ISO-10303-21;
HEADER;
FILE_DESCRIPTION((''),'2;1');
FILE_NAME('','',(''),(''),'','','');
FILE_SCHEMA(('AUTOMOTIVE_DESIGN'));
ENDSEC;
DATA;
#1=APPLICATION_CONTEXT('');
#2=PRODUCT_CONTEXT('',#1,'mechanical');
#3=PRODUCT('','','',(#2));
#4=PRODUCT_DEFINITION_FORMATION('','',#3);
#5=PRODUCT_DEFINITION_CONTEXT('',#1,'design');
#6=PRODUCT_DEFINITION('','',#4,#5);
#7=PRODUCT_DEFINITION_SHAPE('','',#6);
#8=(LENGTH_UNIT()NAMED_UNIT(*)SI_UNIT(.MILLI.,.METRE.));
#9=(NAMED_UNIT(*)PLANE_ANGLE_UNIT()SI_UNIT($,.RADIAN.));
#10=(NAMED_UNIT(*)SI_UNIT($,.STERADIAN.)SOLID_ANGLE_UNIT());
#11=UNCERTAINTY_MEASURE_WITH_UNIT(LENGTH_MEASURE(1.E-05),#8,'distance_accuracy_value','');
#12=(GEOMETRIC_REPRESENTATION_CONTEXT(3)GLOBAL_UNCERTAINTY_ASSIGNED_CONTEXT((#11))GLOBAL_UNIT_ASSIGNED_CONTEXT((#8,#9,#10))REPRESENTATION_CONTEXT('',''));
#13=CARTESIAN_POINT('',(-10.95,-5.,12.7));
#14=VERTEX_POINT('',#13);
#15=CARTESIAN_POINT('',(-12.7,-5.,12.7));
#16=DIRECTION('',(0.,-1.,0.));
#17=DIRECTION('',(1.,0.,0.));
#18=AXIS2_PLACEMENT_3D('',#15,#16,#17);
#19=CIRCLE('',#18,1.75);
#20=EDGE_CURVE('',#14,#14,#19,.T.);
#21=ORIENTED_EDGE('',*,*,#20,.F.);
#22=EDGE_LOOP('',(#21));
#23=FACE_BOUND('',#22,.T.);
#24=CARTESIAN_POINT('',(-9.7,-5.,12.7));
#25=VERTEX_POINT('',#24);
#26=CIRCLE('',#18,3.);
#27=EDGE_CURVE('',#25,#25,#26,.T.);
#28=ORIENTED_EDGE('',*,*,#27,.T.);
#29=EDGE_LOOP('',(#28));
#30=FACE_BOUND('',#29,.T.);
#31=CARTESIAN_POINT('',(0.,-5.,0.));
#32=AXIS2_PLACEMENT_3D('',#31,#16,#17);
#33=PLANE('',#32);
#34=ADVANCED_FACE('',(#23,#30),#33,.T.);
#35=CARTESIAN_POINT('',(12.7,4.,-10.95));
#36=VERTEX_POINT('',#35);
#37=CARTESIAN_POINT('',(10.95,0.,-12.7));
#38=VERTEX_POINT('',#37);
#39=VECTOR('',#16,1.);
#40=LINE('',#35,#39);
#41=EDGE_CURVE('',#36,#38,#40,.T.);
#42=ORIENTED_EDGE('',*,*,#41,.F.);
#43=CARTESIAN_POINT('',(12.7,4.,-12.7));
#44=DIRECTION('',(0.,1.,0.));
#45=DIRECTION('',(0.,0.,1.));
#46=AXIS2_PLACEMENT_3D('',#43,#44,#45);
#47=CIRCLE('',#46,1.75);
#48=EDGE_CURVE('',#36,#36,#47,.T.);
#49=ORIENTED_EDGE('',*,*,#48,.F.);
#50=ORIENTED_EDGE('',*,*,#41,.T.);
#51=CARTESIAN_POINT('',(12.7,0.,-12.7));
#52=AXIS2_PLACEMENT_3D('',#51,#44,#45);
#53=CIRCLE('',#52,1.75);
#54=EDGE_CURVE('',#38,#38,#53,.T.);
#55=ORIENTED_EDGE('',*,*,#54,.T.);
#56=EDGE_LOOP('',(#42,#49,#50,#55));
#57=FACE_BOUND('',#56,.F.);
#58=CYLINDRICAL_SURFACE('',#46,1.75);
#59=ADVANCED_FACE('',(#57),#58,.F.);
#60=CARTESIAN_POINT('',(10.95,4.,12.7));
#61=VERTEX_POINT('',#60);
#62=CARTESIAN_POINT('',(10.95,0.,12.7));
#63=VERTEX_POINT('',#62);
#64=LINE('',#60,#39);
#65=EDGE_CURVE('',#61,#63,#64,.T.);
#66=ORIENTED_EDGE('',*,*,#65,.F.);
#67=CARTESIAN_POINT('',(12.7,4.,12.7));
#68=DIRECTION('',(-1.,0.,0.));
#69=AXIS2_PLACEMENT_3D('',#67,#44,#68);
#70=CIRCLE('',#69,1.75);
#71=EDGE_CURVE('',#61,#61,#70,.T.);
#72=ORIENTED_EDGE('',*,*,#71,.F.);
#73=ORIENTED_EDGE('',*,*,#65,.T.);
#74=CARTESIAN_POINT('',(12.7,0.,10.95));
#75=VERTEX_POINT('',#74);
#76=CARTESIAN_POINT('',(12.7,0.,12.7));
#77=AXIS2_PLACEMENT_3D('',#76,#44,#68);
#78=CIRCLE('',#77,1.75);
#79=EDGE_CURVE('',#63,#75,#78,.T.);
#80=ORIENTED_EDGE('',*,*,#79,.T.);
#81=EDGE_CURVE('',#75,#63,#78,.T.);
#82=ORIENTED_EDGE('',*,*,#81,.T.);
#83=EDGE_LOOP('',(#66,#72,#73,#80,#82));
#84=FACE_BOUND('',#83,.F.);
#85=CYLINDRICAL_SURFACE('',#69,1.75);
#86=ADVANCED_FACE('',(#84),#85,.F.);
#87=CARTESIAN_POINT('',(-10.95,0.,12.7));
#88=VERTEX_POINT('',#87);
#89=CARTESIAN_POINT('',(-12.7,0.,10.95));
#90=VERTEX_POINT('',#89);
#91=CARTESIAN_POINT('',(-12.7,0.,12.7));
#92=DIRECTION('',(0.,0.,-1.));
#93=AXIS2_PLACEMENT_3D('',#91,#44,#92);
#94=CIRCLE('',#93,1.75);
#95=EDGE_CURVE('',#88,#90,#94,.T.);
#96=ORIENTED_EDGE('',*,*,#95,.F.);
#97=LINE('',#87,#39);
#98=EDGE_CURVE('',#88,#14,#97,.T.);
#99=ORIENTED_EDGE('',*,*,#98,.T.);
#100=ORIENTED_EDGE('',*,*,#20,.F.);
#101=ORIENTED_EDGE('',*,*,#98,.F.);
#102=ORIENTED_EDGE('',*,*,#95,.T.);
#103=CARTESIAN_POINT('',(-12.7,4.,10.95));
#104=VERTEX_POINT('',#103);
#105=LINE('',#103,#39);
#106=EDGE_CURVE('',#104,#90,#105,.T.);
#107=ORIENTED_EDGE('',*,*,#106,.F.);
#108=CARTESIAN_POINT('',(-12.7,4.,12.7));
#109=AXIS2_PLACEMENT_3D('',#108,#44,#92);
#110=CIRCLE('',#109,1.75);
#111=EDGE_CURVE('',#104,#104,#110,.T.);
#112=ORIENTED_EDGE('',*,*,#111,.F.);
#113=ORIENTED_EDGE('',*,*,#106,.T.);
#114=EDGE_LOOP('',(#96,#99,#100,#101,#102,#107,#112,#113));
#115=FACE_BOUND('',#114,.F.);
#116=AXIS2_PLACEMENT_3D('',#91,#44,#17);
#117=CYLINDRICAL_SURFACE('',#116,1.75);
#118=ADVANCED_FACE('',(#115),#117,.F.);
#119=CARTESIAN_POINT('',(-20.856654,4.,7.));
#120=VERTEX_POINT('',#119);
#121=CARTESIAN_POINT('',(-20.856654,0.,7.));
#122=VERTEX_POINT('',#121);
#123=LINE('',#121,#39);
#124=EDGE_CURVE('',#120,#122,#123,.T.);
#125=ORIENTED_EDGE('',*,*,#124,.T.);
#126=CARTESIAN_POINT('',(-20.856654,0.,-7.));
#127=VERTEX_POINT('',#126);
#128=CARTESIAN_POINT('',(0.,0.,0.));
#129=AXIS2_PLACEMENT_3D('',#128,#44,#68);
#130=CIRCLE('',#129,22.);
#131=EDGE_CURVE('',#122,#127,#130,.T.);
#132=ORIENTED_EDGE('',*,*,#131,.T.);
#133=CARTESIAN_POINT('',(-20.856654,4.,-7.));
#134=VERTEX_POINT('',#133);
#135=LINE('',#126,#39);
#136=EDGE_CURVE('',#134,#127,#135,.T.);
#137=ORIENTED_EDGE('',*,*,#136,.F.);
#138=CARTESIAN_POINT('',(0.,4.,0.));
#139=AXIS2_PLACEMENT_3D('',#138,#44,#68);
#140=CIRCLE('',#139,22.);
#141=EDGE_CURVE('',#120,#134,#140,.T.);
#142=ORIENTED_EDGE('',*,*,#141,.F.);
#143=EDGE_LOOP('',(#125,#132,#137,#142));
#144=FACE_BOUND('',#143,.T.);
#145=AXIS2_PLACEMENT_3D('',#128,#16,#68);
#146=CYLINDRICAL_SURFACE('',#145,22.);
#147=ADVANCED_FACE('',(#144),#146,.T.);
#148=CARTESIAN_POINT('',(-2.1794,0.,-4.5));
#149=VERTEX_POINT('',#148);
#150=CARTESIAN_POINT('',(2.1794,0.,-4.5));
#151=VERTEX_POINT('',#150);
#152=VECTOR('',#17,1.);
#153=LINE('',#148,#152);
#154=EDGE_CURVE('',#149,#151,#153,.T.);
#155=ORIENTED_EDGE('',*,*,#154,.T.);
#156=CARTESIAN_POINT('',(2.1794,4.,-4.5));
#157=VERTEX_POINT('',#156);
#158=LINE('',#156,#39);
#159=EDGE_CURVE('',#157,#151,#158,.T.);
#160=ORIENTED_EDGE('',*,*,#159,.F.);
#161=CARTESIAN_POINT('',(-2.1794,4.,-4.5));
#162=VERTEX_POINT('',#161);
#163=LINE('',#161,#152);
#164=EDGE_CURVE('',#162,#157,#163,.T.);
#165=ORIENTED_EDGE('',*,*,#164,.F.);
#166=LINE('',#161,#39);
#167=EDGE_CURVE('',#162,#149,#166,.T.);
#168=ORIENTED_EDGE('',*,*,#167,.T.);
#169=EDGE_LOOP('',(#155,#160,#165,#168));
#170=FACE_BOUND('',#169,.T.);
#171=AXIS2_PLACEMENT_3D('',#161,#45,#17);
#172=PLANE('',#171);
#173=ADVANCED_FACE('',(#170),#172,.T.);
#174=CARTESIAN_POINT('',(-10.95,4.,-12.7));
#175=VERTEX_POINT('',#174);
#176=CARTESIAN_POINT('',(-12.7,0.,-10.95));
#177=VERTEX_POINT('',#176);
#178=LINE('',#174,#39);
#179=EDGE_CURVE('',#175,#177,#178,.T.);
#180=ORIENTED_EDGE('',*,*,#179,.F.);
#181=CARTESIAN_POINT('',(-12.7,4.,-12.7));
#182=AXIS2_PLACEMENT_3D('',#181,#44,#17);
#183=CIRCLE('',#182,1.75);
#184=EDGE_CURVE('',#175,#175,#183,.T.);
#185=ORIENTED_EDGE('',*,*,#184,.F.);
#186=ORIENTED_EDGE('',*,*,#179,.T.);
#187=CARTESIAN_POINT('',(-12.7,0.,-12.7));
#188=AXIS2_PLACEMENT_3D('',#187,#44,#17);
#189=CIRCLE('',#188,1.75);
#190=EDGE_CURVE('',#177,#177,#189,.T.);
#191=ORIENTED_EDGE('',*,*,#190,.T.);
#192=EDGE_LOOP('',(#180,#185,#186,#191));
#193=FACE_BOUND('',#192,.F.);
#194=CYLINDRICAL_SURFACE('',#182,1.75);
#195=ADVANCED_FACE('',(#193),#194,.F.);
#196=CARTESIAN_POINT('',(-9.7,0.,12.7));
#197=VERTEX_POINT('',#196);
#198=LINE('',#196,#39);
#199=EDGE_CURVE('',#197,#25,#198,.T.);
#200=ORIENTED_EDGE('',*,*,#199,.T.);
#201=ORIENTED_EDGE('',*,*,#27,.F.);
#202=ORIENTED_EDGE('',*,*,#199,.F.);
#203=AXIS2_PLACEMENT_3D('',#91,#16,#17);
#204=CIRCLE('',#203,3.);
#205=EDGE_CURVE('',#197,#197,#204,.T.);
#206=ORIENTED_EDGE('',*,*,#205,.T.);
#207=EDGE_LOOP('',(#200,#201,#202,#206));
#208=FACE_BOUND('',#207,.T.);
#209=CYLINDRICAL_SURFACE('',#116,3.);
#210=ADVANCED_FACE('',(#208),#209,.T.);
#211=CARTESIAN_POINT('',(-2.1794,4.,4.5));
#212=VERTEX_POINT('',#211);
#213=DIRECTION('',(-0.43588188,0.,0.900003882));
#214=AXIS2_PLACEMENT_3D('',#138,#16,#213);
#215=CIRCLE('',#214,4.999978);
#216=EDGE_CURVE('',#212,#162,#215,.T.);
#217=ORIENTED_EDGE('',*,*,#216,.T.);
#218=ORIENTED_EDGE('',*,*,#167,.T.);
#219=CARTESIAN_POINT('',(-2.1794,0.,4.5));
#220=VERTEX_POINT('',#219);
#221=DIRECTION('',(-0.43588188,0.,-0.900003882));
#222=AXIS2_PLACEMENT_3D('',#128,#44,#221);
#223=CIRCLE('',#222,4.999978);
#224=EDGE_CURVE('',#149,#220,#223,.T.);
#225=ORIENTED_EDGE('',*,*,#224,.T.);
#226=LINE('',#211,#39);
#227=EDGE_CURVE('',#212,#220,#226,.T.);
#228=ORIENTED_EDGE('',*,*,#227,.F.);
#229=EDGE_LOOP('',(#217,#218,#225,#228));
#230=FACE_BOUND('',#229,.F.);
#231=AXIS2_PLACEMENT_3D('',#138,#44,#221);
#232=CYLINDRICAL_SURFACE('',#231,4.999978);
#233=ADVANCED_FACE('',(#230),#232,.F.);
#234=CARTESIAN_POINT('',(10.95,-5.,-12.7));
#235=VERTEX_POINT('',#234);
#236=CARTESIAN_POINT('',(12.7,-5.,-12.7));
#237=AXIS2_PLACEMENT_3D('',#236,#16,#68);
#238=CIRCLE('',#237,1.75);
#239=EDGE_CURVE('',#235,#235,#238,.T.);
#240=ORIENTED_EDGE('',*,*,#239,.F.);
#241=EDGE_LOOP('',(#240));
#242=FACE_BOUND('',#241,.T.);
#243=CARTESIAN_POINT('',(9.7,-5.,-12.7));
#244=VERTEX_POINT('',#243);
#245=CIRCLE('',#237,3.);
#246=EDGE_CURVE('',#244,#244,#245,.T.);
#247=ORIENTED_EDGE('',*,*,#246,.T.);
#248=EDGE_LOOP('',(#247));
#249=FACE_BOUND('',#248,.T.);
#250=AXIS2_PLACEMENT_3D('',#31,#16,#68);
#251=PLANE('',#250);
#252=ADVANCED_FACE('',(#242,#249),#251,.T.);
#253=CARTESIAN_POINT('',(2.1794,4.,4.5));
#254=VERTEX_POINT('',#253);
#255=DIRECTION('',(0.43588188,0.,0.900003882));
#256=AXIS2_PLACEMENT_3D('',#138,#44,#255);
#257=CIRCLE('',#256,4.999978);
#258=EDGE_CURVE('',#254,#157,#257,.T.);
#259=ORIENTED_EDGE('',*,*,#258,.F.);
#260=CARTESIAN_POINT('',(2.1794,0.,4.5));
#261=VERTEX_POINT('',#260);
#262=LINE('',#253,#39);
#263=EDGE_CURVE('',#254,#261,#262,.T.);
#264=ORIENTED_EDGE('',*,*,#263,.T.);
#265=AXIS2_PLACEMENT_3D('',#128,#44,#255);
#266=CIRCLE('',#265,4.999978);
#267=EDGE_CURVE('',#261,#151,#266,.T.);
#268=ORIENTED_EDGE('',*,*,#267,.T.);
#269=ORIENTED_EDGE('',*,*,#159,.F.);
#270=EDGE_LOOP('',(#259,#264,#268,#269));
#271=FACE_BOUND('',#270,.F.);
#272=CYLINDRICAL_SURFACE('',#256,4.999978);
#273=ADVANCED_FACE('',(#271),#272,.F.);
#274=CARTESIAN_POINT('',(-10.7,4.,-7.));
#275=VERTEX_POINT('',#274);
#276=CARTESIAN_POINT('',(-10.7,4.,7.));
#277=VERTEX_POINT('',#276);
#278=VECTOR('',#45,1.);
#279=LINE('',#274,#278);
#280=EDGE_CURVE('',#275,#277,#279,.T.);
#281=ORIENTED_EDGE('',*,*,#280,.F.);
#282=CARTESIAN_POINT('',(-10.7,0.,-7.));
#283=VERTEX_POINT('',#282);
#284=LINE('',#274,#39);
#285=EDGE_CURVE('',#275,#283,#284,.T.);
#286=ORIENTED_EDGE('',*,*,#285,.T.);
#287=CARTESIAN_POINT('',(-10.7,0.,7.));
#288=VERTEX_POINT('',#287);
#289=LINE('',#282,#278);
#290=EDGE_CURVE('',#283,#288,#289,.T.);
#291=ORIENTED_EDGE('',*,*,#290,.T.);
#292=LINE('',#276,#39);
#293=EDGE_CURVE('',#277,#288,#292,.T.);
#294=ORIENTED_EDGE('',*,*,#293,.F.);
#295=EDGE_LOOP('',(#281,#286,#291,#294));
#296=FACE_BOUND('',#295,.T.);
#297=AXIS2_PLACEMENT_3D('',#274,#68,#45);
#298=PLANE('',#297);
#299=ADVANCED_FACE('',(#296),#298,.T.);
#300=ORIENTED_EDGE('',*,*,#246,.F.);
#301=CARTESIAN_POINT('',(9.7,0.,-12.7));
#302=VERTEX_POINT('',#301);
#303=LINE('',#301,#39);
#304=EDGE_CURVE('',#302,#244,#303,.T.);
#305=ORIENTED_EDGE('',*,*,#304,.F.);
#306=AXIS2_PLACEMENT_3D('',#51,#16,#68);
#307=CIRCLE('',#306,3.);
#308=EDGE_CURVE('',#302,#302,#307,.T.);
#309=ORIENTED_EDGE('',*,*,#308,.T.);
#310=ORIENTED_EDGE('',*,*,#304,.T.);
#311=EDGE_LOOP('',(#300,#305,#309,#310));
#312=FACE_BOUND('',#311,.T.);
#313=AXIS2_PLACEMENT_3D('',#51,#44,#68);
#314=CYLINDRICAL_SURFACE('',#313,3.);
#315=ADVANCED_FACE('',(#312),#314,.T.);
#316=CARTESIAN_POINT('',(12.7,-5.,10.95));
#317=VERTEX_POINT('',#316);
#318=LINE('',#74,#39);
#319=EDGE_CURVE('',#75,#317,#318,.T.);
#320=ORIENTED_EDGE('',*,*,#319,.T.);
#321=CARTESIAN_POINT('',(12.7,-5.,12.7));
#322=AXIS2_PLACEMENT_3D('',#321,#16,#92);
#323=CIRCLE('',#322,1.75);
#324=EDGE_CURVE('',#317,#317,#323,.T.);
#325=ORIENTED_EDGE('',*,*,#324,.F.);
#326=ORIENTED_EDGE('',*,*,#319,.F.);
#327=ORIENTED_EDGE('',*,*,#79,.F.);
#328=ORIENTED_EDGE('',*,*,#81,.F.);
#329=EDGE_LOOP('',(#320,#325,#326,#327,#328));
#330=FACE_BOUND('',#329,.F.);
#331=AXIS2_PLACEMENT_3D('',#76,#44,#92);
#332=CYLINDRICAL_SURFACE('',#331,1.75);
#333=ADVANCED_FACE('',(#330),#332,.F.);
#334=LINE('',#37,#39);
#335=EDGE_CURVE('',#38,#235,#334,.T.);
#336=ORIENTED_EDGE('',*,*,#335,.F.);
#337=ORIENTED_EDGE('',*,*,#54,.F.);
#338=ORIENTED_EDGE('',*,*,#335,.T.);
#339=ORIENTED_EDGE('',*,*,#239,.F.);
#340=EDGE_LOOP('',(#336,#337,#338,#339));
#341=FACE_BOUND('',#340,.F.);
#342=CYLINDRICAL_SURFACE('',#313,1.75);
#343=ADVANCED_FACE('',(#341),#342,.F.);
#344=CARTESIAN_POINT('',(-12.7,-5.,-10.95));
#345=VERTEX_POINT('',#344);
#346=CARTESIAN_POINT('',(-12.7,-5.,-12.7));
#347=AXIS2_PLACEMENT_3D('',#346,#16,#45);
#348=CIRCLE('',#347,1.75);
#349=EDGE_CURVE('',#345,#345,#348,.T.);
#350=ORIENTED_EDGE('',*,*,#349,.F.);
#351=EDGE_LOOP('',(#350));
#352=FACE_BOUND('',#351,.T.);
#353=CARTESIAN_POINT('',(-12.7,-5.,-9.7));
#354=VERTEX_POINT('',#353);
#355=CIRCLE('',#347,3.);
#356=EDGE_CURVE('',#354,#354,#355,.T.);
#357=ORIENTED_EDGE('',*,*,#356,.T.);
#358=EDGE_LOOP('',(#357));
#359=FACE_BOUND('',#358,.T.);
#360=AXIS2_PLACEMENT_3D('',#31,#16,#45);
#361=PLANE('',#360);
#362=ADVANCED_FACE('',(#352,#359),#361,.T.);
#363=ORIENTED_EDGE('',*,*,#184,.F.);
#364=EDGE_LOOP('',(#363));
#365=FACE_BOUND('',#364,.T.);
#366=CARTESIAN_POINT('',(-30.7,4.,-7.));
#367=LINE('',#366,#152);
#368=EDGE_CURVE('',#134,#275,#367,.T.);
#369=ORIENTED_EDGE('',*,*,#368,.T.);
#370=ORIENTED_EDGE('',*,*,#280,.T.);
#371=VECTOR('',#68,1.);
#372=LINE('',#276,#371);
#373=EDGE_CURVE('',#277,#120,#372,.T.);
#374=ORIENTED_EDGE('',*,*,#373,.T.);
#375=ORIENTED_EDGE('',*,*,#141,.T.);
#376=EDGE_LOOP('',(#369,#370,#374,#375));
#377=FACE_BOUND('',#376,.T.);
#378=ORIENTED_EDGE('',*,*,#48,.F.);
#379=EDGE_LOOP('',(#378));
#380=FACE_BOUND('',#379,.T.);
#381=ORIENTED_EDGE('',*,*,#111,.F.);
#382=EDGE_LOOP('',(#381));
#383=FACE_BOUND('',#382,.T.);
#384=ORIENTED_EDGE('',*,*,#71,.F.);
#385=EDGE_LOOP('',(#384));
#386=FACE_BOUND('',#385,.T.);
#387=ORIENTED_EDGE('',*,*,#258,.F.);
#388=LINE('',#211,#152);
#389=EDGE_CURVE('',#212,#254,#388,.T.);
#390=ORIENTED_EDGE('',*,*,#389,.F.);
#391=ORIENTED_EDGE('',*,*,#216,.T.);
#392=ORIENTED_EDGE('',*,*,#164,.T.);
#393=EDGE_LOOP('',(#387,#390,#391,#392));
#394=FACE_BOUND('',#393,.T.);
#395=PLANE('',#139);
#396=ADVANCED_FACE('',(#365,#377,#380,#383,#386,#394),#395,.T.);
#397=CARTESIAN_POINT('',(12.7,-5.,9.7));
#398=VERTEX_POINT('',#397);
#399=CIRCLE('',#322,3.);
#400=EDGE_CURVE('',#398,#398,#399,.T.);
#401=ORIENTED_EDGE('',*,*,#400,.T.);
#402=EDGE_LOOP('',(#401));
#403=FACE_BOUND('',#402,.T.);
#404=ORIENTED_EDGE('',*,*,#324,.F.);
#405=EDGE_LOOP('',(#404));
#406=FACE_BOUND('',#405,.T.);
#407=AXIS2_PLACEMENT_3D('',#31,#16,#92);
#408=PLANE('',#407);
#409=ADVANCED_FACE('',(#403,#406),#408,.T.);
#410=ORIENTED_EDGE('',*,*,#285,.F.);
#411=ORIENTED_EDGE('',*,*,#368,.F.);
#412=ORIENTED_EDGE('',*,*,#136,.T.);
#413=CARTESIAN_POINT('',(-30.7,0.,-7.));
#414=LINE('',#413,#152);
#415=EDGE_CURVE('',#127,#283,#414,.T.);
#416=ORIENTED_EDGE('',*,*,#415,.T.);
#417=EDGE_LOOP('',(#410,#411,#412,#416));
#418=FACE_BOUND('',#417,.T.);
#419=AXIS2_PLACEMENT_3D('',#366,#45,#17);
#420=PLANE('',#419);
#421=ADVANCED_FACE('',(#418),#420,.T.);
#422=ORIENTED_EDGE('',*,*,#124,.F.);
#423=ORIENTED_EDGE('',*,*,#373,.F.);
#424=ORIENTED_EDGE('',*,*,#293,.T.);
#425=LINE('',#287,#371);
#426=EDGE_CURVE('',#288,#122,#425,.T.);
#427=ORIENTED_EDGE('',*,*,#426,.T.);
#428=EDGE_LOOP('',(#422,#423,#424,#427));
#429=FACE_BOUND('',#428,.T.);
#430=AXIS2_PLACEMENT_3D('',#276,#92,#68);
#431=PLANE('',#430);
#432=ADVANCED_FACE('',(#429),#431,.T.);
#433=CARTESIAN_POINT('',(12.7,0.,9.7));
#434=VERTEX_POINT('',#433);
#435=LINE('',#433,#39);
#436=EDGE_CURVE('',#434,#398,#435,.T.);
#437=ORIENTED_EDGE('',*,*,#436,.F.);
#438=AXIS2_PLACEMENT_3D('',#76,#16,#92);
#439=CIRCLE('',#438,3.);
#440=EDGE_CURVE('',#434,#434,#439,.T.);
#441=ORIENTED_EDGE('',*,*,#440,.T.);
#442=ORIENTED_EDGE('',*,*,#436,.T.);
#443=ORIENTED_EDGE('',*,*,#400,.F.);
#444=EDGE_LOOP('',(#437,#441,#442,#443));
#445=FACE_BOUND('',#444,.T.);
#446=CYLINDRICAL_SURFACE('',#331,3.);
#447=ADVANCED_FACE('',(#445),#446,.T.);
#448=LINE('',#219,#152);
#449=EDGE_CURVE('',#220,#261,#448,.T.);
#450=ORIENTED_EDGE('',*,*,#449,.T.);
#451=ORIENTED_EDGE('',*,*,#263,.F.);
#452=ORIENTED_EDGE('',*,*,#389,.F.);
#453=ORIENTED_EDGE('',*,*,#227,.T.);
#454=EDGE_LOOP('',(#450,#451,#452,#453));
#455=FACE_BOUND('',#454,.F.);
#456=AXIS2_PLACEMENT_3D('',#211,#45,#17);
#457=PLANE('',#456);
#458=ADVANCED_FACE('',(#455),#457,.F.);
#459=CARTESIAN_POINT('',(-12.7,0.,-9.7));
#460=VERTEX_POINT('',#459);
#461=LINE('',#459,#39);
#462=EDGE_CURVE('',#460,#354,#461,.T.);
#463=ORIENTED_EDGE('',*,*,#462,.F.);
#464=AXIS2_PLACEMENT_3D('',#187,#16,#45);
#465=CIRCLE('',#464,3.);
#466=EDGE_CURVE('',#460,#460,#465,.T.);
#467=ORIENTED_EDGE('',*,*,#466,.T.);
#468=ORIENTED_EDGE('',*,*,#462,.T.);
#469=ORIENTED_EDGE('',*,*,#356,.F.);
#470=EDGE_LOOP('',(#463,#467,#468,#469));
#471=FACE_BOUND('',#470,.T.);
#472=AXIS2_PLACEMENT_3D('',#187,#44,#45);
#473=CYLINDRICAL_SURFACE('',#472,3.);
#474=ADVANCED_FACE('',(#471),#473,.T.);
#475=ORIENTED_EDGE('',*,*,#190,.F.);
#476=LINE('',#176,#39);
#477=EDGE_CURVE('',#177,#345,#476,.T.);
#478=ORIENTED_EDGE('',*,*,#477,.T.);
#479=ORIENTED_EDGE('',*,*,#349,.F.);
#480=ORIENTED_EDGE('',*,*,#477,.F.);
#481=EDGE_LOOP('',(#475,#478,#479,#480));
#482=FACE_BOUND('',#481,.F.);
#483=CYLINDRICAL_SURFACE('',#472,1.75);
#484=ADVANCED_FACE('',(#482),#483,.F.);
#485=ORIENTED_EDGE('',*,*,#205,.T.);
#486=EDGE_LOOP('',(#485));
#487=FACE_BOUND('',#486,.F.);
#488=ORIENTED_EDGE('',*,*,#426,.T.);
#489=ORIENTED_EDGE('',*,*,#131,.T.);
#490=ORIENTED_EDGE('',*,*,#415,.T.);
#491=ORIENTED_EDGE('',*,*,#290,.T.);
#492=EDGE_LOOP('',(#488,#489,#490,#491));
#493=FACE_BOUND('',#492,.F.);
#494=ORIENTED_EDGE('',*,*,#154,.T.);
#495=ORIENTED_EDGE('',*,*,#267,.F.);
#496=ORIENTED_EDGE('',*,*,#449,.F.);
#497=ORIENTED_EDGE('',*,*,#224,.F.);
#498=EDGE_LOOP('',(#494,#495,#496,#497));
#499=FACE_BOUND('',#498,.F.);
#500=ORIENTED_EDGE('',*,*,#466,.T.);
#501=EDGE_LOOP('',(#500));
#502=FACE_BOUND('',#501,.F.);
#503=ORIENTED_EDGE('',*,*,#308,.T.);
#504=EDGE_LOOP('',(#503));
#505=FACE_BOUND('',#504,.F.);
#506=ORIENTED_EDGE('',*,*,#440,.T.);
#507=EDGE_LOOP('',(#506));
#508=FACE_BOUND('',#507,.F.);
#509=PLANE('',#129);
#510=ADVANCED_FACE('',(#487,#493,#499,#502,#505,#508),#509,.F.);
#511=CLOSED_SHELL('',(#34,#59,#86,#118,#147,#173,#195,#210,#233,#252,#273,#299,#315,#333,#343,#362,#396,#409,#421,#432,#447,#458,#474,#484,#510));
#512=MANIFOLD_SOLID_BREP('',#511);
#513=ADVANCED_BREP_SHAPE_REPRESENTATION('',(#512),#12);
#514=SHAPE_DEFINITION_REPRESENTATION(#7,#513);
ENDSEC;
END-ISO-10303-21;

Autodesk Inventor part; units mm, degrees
ref_plane "YZ Plane" through (0, 0, 0) normal (1, 0, 0) x (0, 1, 0)
ref_plane "XZ Plane" through (0, 0, 0) normal (0, 1, 0) x (-1, 0, 0)
ref_plane "XY Plane" through (0, 0, 0) normal (0, 0, 1) x (1, 0, 0)
sketch "Sketch1" plane through (0, 0, 0) normal (0, 1, 0) x (-1, 0, 0)
  circle A0 centre (0, 0) radius 22
  dimension "d0" = 44
extrude "Extrusion1" add sketch "Sketch1" along normal blind 4
sketch "Sketch2" plane through (0, 4, 0) normal (0, 1, 0) x (1, 0, 0)
  line L0 (0, 0) -> (-12.7, 0) construction
  line L1 (0, 0) -> (12.7, 0) construction
  line L2 (-12.7, 0) -> (-12.7, 12.7) construction
  line L3 (-12.7, 12.7) -> (12.7, 12.7) construction
  circle A0 centre (-12.7, 12.7) radius 1.75
  dimension "d3" = 12.7
  dimension "d4" = 12.7
  dimension "d5" = 12.7
  dimension "d6" = 3.5
extrude "Extrusion2" cut sketch "Sketch2" against normal blind 4
pattern_circular "Circular Pattern1" count 4 over 360 about axis through (0, 0, 0) along (0, 1, 0) of "Extrusion2"
sketch "Sketch3" plane through (0, 4, 0) normal (0, 1, 0) x (1, 0, 0)
  line L0 (0, 0) -> (-30.7, 0) construction
  line L1 (-30.7, 0) -> (-30.7, 7) construction
  line L2 (-30.7, 7) -> (-10.7, 7) construction
  line L3 (-10.7, 7) -> (-10.7, -7) construction
  line L4 (-10.7, -7) -> (-30.7, -7)
  line L5 (-30.7, -7) -> (-30.7, 7)
  line L6 (-30.7, 7) -> (-10.7, 7)
  line L7 (-10.7, 7) -> (-10.7, -7)
  line L8 (0, 0) -> (-10.7, 0) construction
  dimension "d14" = 20
  dimension "d15" = 14
  dimension "d31" = 10.7
extrude "Extrusion3" cut sketch "Sketch3" against normal blind 4
sketch "Sketch4" plane through (0, 4, 0) normal (0, 1, 0) x (1, 0, 0)
  circle A0 centre (-12.7, 12.7) radius 1.75 projected
  line L0 (0, 0) -> (-12.7, 12.7)
  line L1 (-4.5, 0) -> (-4.5, -2.1794) construction
  line L2 (0, 4.5) -> (0, -4.5) construction
  line L3 (-2.1794, 4.5) -> (2.1794, 4.5)
  line L4 (-2.1794, -4.5) -> (2.1794, -4.5)
  arc A1 (2.1794, -4.5) -> (2.1794, 4.5) centre (0, 0) ccw
  arc A2 (-2.1794, 4.5) -> (-2.1794, -4.5) centre (0, 0) ccw
  dimension "d21" = 4.5
  dimension "d22" = 9
extrude "Extrusion4" cut sketch "Sketch4" against normal blind 4 contours L3 A1 L4 A2
sketch "Sketch5" plane through (0, 0, 0) normal (0, -1, 0) x (1, 0, 0)
  circle A0 centre (-12.7, 12.7) radius 1.75 projected
  circle A1 centre (-12.7, 12.7) radius 3
  circle A2 centre (-12.7, 12.7) radius 1.75
  point P0 (0, 0)
  dimension "d25" = 6
extrude "Extrusion5" add sketch "Sketch5" along normal blind 5
pattern_circular "Circular Pattern2" count 4 over 360 about axis through (0, 0, 0) along (0, 1, 0) of "Extrusion5"
properties part number "bevestigingpot"
